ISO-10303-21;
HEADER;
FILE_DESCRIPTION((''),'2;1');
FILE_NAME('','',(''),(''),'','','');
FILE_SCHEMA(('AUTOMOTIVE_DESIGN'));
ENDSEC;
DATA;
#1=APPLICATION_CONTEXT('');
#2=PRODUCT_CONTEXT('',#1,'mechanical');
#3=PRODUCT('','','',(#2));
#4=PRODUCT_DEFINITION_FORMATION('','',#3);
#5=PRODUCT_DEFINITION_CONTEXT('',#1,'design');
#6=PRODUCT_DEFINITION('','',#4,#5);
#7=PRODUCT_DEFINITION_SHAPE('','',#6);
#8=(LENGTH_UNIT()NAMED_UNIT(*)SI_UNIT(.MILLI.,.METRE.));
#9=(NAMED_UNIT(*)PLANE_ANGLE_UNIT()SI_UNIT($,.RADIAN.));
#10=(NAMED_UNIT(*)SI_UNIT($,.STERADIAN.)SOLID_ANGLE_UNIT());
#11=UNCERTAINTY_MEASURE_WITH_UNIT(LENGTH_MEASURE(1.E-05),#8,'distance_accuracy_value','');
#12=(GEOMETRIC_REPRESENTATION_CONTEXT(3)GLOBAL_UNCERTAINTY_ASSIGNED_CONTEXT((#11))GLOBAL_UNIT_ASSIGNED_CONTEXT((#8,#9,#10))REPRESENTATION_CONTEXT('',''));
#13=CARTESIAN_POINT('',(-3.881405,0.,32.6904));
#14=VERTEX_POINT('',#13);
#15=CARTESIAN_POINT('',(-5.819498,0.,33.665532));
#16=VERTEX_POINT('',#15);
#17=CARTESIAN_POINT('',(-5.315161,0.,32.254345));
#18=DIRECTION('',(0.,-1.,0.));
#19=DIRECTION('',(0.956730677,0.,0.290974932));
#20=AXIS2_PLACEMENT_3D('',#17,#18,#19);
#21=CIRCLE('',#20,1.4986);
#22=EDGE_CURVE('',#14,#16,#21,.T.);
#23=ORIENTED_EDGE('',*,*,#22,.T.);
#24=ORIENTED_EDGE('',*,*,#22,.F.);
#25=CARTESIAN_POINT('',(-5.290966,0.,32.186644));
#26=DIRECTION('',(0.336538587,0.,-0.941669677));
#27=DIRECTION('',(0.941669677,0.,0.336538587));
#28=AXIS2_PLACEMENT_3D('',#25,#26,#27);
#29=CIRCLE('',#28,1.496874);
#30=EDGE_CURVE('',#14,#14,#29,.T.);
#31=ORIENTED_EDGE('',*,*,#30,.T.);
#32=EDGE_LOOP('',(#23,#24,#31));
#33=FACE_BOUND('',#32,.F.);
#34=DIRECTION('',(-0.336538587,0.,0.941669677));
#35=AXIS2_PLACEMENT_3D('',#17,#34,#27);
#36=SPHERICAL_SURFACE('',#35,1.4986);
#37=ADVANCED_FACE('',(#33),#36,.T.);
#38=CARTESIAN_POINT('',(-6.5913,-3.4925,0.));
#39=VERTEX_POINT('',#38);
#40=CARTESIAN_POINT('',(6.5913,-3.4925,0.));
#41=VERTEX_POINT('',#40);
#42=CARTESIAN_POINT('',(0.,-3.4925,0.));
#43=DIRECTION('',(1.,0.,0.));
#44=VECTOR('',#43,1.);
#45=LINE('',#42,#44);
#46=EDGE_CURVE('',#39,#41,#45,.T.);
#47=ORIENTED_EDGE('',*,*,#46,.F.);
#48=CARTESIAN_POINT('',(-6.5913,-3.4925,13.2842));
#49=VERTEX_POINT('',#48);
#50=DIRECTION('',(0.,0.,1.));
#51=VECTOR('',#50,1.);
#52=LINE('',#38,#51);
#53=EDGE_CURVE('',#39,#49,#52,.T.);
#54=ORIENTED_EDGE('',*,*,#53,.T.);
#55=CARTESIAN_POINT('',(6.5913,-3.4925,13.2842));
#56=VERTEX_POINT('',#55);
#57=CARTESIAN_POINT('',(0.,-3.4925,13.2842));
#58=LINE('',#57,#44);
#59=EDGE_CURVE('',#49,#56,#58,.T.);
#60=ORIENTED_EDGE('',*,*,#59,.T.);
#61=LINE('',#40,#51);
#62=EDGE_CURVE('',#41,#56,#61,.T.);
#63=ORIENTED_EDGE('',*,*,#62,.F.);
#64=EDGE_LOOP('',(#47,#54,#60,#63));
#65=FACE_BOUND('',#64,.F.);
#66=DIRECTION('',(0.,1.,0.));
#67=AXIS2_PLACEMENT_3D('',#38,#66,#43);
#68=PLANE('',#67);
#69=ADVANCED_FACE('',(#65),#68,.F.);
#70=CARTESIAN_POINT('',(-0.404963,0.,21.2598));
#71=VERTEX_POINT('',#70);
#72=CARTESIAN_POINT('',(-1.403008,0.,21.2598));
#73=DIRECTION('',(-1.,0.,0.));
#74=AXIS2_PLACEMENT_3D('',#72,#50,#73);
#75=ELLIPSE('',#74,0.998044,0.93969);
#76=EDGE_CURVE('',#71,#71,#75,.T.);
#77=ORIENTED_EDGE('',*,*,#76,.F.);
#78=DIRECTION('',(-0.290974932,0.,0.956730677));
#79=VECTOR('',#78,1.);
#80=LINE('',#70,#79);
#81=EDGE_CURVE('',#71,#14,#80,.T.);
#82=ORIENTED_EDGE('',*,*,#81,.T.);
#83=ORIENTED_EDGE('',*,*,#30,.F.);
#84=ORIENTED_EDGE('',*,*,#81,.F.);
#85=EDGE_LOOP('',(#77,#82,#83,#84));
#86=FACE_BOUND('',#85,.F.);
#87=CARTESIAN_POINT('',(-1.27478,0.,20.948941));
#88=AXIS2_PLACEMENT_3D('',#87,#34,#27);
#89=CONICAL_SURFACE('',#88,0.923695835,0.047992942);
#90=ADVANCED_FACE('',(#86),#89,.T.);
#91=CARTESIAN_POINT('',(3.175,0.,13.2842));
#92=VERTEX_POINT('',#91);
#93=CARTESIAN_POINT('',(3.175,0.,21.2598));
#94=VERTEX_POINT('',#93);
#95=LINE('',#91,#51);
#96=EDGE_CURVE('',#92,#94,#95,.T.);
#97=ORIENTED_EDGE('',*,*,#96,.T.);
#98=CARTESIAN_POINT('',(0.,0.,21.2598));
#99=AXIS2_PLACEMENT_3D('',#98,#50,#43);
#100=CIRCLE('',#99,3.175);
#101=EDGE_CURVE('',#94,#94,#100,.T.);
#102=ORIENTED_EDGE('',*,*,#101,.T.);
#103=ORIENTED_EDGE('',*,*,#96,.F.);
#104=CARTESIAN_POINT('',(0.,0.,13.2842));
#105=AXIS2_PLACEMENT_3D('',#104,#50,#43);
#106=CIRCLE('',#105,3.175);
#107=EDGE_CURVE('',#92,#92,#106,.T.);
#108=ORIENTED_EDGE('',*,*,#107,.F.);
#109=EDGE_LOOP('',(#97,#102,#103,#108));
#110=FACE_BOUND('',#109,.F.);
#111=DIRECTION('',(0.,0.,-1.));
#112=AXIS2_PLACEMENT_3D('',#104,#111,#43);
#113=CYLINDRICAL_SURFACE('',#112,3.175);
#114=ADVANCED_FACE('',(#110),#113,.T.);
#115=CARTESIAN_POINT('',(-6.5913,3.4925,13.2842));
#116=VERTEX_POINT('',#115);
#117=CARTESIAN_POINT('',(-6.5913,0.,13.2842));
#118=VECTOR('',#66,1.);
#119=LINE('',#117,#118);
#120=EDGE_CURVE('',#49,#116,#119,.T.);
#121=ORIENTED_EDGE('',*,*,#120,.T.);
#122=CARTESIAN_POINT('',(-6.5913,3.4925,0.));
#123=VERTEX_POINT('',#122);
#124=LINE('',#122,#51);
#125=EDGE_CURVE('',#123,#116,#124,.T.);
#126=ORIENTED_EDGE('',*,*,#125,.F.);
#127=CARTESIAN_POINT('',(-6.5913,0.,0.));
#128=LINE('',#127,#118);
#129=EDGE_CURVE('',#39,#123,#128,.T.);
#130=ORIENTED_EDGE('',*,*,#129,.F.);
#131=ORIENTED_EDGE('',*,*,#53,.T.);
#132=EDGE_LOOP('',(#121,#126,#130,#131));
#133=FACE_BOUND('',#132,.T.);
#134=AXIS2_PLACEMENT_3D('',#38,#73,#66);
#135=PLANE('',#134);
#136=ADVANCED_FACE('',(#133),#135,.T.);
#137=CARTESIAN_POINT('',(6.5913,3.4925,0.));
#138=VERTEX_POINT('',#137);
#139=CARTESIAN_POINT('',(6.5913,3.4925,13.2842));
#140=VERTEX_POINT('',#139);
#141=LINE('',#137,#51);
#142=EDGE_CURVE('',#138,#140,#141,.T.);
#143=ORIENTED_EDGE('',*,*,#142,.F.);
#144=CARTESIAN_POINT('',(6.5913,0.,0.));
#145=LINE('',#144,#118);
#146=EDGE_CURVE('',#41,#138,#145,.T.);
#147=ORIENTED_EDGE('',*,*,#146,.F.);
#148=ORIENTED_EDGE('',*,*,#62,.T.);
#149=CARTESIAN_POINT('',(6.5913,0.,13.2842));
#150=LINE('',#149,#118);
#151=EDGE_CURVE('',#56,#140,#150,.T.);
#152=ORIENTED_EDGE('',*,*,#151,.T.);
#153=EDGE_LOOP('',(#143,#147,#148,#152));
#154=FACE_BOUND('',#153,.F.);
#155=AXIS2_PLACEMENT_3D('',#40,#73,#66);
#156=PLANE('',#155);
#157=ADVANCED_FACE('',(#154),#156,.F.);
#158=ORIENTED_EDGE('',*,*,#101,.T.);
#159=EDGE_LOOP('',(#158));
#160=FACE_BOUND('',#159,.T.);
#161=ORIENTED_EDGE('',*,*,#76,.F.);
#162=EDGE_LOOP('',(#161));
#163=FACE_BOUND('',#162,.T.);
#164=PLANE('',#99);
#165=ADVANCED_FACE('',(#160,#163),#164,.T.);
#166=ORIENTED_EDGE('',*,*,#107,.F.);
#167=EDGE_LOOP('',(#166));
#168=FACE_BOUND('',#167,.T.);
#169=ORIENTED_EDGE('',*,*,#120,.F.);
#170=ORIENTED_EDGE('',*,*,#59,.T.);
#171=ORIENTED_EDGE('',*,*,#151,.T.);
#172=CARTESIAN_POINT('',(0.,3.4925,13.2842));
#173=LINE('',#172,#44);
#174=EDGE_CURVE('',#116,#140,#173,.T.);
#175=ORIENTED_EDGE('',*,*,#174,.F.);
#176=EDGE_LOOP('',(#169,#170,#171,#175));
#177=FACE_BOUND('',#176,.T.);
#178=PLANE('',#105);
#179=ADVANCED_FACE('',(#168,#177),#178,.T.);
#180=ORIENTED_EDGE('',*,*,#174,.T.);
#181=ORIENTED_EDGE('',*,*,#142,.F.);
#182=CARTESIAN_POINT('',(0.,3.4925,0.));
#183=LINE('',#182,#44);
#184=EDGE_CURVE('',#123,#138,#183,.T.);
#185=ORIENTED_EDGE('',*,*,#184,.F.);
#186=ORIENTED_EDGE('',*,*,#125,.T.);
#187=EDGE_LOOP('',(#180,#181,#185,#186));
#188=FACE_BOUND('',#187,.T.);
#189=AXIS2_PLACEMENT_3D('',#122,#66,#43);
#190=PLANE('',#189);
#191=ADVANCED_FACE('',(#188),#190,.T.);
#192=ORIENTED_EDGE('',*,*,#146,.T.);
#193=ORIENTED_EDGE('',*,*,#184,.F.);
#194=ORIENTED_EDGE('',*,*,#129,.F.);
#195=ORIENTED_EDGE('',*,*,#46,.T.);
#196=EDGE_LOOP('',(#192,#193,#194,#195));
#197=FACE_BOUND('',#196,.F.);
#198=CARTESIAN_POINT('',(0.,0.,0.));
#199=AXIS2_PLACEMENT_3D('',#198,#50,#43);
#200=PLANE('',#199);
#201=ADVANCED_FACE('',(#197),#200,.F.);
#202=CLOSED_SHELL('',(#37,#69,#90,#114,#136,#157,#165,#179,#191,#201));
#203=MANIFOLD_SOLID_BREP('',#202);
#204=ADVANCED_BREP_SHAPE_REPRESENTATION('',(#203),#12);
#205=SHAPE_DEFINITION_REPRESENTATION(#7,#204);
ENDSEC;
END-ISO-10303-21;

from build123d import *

# Parameters (mm, degrees)
F0_W     = 13.1826
F0_H     = 6.985
F1_DEPTH = 13.2842
F2_R     = 3.175
F3_DEPTH = 7.9756


with BuildPart() as f1:
    # F0 (on Top) → F1 (new body)
    with BuildSketch(Plane.XY):
        Rectangle(F0_W, F0_H)
    extrude(amount=F1_DEPTH)

    # F2 (on face) → F3 (join)
    with BuildSketch(Plane.XY.offset(13.2842)):
        Circle(F2_R)
    extrude(amount=F3_DEPTH)

    # F5 (on offset) → F6 (revolve)
    with BuildSketch(Plane.XZ):
        with BuildLine():
            Line((-5.8194979442, 33.6655315498), (-1.3858759776, 21.2598))
            Line((-1.3858759776, 21.2598), (-0.4049631825, 21.2598))
            Line((-0.4049631825, 21.2598), (-3.8814046251, 32.6904004058))
            ThreePointArc((-3.8814046251, 32.6904004058), (-4.6416068333, 33.5930486447), (-5.8194979442, 33.6655315498))
        make_face()
    revolve(axis=Axis((-3.6026869609, 0, 27.4626657749), (0.3365385867, 0, -0.9416696765)))


solid = f1.part
